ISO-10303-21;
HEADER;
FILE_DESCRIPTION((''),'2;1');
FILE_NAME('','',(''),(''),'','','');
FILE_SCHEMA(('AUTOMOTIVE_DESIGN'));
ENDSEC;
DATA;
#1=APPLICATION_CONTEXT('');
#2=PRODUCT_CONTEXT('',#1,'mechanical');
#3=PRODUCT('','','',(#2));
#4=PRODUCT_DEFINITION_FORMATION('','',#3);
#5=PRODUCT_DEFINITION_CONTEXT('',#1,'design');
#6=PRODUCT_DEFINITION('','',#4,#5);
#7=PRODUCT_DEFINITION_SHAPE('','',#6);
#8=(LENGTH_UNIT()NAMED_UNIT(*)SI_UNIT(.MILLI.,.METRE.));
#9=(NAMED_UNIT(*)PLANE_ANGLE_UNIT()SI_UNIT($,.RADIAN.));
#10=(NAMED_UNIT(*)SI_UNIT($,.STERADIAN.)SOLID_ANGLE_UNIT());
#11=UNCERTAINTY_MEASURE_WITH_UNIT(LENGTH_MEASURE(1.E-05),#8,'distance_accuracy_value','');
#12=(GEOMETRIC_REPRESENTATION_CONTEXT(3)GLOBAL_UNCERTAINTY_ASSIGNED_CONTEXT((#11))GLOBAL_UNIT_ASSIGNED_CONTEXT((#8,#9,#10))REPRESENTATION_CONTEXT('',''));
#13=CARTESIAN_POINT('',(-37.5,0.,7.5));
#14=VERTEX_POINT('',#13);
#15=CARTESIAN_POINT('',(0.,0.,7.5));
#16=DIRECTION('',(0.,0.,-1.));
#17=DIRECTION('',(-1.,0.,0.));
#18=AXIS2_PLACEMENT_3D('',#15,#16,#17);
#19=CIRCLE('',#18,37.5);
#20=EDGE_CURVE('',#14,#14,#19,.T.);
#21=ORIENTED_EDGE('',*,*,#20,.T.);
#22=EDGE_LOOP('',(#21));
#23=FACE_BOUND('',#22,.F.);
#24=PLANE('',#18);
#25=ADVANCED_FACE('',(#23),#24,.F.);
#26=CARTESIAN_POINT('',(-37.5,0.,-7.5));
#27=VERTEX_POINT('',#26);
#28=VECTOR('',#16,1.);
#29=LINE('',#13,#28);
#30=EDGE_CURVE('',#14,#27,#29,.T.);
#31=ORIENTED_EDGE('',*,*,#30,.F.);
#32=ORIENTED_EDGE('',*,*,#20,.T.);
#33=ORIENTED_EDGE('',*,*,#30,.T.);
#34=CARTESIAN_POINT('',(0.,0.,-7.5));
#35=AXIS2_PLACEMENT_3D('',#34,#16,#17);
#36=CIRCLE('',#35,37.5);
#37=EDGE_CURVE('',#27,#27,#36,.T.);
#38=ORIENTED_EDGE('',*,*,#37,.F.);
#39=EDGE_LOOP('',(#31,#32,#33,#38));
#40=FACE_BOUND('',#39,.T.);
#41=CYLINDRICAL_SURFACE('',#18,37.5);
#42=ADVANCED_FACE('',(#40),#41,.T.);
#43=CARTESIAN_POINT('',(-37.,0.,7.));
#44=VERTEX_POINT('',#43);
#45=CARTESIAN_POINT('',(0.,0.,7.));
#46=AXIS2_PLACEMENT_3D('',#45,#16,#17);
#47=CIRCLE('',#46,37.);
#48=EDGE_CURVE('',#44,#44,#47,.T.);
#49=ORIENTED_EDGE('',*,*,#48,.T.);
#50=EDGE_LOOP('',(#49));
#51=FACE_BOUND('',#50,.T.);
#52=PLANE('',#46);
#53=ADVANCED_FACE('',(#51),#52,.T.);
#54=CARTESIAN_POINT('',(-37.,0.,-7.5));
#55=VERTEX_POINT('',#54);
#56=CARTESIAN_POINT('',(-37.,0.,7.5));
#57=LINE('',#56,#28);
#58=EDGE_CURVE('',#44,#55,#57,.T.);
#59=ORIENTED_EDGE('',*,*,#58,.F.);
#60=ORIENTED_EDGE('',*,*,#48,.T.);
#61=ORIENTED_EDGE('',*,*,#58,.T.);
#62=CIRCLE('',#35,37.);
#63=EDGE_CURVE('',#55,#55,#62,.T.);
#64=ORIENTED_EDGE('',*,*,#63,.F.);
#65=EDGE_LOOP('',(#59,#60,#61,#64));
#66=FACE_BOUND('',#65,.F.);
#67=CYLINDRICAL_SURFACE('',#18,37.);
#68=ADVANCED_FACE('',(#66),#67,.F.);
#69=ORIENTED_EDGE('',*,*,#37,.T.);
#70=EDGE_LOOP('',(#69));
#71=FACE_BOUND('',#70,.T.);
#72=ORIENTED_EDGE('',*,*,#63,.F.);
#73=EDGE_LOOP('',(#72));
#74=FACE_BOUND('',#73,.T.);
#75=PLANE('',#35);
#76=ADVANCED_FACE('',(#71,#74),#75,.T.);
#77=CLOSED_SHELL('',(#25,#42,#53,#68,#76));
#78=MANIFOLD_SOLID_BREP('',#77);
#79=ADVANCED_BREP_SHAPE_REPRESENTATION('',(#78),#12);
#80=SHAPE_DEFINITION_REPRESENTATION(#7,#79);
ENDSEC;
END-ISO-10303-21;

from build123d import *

# Parameters (mm, degrees)
F0_W = 37.5
F0_H = 7.5
F2_T = -0.5


# Not quite as in the source:
# - a feature names something its author has since deleted; it is built from what else it names


with BuildPart() as f1:
    # F0 (on Front) → F1 (revolve)
    with BuildSketch(Plane.XZ):
        with Locations((-18.75, -3.75)):
            Rectangle(F0_W, F0_H)
        with Locations((-18.75, 3.75)):
            Rectangle(F0_W, F0_H)
    revolve(axis=Axis((0, 0, -0.1110713929), (0, 0, -1)))

    # F2
    f2_openings = [f1.faces().sort_by_distance(p)[0] for p in [
        (0, 0, -7.5),
    ]]
    offset(amount=F2_T, openings=f2_openings)


solid = f1.part
